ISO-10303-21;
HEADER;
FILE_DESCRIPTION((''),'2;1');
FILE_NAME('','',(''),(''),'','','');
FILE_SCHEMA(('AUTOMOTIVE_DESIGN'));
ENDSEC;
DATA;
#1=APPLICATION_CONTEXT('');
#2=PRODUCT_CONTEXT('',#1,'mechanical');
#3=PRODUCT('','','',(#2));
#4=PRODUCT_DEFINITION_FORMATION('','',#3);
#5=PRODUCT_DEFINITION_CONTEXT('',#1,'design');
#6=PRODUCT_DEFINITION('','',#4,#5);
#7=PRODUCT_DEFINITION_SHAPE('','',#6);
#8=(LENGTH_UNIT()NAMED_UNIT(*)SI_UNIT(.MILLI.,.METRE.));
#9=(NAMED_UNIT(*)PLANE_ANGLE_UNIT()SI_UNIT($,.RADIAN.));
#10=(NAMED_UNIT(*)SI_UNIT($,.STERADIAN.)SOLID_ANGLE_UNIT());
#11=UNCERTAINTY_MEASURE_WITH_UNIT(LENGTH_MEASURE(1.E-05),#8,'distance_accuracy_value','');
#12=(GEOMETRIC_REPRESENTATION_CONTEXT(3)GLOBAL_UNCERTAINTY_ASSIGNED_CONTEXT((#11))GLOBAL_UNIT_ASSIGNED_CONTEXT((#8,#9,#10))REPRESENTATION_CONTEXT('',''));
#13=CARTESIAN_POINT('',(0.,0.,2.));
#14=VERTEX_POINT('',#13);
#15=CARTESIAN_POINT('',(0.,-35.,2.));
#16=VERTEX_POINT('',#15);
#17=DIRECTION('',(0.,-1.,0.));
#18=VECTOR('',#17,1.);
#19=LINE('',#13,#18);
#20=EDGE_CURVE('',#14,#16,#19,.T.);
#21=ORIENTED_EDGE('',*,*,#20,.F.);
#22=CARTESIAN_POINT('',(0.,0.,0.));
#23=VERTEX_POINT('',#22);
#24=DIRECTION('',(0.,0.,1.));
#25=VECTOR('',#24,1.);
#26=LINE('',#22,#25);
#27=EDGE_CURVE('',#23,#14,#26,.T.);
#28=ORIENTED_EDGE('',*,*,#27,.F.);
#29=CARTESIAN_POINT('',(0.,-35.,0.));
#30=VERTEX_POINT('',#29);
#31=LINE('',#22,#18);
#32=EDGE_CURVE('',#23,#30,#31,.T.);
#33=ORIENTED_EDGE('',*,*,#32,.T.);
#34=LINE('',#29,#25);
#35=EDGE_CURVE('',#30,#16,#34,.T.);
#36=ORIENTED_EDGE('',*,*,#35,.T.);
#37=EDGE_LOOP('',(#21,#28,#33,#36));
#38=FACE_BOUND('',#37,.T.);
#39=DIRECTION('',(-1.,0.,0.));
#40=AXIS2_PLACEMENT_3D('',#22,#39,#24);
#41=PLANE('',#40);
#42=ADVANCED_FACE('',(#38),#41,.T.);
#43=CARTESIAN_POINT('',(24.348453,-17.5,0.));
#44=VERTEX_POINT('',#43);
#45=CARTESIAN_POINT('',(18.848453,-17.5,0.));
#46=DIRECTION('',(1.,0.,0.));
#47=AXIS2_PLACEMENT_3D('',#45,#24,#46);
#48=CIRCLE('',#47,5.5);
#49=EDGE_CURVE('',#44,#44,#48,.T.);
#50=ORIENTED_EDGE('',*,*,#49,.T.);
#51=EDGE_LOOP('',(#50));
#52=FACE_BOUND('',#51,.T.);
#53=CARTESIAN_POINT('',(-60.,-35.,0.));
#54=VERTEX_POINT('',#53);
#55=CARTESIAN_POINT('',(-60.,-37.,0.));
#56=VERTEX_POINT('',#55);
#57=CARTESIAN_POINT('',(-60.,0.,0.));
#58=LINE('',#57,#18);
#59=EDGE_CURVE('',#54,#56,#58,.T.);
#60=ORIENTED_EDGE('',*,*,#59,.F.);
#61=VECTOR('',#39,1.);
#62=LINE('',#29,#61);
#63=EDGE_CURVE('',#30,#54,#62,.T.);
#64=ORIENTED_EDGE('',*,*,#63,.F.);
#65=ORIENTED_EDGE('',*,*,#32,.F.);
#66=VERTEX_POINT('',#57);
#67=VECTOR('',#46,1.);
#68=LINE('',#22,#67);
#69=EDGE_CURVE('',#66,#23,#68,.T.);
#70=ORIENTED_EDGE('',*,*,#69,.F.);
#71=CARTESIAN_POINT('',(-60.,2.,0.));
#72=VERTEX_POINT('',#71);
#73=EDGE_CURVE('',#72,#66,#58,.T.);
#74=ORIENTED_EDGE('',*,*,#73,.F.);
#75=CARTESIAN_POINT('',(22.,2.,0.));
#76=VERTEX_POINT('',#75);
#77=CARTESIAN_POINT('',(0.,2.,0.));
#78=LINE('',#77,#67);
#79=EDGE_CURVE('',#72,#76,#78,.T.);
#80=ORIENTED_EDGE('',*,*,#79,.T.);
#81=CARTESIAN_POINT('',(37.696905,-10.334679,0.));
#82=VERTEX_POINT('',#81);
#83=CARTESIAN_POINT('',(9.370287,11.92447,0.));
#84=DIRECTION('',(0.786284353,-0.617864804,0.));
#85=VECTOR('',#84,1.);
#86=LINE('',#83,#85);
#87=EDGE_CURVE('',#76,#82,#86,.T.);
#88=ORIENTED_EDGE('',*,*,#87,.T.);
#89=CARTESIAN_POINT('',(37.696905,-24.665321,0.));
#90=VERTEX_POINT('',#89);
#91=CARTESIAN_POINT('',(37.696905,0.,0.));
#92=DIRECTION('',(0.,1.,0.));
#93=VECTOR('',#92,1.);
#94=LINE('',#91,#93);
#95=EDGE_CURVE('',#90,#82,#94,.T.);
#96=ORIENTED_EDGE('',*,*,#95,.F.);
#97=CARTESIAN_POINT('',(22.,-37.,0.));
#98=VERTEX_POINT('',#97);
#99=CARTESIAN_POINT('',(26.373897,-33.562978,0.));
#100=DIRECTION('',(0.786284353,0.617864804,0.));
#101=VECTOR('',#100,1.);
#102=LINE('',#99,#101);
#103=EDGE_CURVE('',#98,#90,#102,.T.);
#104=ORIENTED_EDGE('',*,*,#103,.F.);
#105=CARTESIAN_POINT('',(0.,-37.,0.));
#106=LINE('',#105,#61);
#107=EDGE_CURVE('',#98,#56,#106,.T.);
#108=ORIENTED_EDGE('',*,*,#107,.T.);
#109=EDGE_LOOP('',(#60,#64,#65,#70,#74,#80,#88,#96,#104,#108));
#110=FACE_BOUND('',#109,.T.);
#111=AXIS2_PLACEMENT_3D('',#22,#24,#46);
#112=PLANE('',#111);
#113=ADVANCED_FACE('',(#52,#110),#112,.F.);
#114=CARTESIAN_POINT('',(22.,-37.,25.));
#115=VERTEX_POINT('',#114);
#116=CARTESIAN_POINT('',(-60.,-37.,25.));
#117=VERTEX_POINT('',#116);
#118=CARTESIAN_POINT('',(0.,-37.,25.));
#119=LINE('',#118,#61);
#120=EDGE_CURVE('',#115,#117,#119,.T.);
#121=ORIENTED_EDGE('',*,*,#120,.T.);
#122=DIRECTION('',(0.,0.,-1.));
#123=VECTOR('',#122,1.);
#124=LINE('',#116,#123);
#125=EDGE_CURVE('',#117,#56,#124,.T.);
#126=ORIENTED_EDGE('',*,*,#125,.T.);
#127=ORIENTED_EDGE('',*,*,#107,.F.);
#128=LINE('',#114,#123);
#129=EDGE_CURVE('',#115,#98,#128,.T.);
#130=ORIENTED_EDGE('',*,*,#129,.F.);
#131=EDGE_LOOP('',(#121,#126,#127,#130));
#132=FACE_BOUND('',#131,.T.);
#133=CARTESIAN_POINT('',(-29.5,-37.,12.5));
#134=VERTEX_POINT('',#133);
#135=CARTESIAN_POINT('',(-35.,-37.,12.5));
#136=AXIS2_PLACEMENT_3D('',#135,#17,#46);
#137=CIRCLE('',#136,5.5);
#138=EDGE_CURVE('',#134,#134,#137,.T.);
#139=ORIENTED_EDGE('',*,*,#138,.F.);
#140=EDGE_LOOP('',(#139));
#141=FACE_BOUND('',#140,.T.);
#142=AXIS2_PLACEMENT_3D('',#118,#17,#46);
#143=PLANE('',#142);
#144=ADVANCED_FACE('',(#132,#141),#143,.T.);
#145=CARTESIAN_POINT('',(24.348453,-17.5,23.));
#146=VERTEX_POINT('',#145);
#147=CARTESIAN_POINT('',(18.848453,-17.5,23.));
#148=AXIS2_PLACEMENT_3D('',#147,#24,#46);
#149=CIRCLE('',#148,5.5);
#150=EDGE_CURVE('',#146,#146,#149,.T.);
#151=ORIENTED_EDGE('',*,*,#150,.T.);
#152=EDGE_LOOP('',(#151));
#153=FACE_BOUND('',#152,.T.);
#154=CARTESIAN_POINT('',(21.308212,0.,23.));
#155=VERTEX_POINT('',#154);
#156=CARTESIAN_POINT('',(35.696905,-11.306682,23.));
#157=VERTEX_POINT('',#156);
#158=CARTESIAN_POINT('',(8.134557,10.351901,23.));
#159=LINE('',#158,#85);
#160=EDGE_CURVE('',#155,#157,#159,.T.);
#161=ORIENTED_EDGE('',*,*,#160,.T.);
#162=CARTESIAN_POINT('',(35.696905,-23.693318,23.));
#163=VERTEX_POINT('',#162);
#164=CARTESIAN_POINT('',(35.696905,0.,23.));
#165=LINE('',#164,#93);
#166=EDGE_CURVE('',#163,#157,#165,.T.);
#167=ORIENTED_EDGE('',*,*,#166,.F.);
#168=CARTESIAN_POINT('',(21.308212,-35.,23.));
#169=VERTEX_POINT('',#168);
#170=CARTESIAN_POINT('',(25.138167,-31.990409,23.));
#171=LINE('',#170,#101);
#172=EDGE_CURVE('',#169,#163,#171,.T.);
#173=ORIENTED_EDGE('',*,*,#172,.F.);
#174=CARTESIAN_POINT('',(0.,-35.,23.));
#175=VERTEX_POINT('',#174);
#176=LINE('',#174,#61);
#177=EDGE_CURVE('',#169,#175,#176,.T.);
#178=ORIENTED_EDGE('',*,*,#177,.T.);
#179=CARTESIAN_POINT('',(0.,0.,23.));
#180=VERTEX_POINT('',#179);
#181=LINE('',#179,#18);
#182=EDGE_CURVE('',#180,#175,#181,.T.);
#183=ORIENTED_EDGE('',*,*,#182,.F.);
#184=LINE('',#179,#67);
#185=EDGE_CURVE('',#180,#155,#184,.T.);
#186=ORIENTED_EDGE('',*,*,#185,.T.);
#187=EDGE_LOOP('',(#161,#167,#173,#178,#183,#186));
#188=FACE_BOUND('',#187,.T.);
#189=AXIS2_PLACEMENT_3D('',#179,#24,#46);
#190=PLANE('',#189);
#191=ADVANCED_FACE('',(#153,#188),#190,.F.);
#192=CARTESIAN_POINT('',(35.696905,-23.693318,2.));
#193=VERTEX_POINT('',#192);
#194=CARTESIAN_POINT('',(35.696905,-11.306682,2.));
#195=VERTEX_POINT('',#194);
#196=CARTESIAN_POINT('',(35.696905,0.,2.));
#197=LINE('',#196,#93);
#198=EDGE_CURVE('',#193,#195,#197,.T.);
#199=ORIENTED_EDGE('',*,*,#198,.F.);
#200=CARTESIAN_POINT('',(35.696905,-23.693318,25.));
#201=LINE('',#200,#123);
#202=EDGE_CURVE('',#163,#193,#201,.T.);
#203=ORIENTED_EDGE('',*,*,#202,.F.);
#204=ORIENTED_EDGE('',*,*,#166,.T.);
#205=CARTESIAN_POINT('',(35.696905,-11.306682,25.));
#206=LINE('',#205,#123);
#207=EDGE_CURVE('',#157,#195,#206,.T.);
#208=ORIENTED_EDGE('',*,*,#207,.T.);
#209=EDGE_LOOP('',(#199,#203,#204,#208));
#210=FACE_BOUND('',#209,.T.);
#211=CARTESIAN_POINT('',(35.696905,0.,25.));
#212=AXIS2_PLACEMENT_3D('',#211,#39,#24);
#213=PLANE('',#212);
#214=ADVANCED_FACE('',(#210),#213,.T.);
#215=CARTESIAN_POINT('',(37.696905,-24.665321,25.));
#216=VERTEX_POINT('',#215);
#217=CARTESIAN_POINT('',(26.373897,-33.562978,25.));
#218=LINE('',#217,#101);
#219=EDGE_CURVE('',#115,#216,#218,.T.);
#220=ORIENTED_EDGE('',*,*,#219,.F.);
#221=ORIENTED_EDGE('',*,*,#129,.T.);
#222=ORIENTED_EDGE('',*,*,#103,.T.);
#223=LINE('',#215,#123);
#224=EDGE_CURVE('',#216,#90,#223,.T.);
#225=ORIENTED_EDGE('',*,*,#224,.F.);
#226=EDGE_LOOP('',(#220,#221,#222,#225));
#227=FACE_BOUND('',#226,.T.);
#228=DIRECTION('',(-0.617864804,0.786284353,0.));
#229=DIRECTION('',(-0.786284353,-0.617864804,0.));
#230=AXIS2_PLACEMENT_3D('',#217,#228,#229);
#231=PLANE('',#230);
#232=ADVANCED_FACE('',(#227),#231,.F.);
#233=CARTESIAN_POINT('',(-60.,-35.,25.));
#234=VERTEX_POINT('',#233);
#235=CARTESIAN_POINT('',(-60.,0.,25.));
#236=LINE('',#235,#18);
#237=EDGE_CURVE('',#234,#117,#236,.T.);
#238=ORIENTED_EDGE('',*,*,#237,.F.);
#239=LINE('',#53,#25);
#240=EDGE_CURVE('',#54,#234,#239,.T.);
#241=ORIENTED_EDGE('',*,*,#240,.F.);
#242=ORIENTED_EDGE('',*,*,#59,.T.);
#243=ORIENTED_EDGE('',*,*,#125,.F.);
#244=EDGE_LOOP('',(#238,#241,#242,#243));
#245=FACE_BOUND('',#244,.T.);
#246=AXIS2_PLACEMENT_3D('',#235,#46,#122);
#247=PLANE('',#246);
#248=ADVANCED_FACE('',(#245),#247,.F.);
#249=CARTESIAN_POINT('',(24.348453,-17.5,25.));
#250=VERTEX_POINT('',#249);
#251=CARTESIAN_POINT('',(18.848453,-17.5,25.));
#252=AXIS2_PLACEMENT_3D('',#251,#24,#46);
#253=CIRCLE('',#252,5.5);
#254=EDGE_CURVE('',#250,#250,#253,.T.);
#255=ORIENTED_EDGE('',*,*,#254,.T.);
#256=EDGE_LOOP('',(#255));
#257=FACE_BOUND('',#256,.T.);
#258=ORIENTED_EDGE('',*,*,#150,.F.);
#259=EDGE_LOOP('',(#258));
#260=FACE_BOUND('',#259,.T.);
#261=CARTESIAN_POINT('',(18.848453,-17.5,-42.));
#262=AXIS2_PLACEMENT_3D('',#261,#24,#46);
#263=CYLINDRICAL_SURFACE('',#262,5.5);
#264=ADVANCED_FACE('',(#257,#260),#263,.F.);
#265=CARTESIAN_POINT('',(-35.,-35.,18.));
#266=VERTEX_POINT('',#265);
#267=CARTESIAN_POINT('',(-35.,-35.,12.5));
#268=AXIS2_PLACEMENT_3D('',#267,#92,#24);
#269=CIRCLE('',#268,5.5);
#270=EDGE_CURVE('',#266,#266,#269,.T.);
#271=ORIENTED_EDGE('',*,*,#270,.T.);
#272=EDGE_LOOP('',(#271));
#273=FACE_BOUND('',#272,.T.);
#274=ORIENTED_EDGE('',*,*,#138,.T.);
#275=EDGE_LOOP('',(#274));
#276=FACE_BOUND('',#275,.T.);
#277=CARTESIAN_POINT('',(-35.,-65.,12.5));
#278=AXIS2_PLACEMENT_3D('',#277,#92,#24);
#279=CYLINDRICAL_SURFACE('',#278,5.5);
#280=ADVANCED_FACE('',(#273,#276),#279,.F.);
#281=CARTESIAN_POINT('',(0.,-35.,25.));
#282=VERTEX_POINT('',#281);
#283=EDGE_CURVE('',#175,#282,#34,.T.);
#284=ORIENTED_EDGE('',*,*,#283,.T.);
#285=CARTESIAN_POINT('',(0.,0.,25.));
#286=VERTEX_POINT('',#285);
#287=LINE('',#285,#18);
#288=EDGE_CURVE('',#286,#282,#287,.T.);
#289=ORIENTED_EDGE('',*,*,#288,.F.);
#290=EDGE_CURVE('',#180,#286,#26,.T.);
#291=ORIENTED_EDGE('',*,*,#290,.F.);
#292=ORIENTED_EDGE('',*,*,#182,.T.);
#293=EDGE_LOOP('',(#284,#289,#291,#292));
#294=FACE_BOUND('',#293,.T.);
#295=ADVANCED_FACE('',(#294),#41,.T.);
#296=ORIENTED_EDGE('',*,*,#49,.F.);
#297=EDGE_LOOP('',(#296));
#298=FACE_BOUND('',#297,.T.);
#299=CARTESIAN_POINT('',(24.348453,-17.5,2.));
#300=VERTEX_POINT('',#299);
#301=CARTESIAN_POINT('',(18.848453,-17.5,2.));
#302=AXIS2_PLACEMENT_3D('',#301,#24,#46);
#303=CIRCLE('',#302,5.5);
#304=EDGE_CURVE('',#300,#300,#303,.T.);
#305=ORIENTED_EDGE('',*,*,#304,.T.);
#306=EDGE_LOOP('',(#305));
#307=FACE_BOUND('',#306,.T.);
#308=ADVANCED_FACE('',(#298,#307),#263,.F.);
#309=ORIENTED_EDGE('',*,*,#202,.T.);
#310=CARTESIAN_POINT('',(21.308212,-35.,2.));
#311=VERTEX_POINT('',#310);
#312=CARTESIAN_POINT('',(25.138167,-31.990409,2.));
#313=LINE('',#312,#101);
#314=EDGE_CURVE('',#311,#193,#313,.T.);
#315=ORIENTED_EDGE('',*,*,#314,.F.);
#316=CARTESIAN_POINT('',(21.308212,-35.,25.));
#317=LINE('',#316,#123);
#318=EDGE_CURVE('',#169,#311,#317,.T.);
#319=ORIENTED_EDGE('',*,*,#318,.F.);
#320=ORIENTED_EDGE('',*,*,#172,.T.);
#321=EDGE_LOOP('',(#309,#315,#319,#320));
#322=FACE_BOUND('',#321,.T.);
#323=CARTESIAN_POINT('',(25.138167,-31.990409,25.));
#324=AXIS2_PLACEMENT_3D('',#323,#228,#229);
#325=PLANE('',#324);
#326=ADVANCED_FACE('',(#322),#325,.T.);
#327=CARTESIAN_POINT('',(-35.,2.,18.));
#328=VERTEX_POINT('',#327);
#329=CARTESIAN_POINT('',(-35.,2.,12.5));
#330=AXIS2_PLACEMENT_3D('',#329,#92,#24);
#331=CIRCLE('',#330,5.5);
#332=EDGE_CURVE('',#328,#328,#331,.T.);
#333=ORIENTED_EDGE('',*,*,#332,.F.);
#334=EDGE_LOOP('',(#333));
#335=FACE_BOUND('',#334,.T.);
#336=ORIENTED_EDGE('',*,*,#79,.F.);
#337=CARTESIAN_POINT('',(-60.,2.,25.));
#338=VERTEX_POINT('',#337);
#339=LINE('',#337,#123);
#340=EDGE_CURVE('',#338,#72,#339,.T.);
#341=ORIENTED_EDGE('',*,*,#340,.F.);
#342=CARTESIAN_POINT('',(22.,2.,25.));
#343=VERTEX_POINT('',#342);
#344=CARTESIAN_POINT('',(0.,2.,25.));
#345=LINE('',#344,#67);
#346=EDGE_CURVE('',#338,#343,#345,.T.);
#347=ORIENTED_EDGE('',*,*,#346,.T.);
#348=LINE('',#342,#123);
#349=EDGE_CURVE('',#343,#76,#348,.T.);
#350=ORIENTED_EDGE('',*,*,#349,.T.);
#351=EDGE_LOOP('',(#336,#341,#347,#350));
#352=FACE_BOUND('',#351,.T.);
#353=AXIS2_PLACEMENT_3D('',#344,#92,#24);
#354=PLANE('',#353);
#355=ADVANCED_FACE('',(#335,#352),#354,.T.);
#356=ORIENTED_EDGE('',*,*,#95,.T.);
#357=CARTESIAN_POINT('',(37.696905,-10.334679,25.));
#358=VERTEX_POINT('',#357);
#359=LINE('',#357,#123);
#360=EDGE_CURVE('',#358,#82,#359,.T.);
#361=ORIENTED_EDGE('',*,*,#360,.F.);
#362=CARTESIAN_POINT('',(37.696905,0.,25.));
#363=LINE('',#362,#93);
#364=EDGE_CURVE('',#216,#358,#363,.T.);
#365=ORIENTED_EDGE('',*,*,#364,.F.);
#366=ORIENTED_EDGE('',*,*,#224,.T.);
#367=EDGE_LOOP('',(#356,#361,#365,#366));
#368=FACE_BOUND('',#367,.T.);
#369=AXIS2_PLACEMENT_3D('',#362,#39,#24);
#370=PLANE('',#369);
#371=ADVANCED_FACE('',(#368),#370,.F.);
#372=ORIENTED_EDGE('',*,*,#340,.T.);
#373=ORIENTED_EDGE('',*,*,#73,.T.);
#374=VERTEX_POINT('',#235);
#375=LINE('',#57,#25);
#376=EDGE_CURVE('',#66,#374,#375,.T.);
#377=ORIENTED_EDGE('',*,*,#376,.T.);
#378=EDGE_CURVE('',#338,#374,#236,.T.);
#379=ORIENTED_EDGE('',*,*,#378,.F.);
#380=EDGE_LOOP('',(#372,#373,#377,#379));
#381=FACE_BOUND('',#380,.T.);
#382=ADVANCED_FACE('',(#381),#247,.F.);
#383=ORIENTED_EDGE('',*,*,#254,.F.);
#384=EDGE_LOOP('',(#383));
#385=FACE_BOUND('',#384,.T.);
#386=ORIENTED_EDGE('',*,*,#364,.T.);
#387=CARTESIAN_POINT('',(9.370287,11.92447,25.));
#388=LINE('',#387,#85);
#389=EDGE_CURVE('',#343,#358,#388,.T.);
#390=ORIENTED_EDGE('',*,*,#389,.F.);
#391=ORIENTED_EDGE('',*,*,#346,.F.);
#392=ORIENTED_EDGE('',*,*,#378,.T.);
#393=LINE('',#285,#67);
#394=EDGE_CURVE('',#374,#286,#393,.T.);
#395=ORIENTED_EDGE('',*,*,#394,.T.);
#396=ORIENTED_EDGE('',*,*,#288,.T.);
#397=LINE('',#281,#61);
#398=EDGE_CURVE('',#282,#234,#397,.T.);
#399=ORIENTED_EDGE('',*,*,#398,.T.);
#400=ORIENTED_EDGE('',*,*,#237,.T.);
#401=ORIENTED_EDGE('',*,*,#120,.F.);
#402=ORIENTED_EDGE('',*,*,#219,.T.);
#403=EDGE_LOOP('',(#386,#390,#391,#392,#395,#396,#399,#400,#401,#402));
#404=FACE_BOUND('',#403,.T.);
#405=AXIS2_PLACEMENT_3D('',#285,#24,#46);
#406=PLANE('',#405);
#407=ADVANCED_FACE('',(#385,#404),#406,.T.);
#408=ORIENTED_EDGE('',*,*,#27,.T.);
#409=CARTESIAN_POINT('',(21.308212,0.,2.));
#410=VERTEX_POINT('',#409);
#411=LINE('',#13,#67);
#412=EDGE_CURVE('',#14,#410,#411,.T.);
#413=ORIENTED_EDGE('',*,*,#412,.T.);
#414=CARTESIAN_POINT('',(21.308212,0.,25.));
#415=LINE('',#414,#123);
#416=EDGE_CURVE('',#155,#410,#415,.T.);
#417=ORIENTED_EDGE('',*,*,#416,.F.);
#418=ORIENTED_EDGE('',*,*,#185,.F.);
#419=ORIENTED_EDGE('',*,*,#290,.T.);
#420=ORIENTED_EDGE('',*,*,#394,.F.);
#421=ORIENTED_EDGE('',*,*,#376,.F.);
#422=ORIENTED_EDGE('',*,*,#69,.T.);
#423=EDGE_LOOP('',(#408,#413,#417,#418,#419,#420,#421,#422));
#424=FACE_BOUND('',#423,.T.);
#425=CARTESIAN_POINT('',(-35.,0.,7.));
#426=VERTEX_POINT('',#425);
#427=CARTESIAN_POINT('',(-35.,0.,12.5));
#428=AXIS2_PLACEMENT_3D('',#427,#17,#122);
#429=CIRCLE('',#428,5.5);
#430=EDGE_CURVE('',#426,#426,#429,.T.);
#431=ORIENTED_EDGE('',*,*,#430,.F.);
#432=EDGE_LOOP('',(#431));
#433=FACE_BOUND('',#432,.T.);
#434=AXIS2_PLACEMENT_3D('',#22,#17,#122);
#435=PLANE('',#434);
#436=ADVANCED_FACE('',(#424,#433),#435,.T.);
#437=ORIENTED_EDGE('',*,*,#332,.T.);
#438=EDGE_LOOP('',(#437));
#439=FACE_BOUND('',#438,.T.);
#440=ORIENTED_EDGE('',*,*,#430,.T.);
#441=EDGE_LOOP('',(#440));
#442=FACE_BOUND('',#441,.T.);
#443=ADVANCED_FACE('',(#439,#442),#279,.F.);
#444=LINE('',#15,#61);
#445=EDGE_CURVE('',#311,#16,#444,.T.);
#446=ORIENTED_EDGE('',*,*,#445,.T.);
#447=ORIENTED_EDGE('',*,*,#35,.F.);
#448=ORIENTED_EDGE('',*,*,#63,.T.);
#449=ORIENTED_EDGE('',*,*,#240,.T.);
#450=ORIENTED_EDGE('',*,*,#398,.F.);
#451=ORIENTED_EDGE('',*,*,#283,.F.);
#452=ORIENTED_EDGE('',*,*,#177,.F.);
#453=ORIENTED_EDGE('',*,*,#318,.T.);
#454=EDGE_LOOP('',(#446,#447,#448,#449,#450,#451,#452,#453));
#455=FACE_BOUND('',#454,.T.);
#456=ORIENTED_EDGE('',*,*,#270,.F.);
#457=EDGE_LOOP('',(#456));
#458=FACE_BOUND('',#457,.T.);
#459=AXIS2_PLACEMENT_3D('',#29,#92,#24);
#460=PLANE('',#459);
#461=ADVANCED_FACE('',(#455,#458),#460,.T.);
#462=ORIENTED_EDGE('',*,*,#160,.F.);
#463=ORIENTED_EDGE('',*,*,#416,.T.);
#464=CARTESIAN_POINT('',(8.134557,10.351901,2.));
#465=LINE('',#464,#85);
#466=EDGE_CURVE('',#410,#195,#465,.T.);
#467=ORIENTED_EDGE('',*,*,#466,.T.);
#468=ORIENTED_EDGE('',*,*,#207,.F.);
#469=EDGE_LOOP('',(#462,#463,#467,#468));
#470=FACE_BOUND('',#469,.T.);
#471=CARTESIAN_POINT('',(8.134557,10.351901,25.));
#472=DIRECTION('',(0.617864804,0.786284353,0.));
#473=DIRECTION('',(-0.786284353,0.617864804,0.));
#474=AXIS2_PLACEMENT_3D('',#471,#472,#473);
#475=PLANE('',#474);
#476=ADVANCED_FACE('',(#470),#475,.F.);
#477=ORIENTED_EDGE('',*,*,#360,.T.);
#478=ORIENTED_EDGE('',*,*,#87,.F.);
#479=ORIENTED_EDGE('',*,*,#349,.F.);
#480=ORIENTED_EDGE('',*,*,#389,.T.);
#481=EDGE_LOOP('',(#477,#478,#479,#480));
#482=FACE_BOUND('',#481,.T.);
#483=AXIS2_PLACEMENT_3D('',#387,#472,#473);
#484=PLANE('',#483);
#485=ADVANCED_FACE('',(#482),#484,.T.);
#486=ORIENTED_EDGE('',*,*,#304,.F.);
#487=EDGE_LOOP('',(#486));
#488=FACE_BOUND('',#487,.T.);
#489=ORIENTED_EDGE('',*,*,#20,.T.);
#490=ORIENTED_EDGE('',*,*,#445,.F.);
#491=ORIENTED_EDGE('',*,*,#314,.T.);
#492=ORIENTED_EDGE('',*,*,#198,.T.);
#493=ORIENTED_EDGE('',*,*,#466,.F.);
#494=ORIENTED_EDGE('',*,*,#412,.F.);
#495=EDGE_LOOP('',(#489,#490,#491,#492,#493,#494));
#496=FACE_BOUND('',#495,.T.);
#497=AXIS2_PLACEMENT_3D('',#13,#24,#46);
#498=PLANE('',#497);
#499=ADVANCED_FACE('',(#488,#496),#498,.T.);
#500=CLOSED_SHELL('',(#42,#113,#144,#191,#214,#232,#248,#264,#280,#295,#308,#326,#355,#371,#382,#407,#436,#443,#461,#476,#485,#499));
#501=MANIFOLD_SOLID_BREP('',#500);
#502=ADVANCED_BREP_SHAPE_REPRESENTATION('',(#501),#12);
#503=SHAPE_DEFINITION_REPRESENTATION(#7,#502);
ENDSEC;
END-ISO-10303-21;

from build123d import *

# Parameters (mm, degrees)
RESSALTO_EXTRUS_O2_DEPTH = 25
ESBO_O6_W                = 60
ESBO_O6_H                = 35
CORTE_EXTRUS_O4_DEPTH    = 25
ESBO_O7_R                = 5.5
CORTE_EXTRUS_O5_DEPTH    = 67
CASCA3_START             = 2
CASCA3_DEPTH             = 21
CORTE_EXTRUS_O7_DEPTH    = 67


# Read off the part's stored shape, not the designer's step: Casca3
with BuildPart() as part:
    # Esboço1 → Ressalto-extrusão2 (new body)
    with BuildSketch(Plane.XY):
        Polygon((-60, 2), (-60, 0), (-60, -35), (-60, -37), (2, -37), (22, -37), (37.696905261, -24.665320756), (37.696905261, -10.334679244), (22, 2), (2, 2), align=None)
    extrude(amount=RESSALTO_EXTRUS_O2_DEPTH)

    # Esboço6 → Corte-extrusão4 (cut)
    with BuildSketch(Plane.XY.offset(25)):
        with Locations((-30, -17.5)):
            Rectangle(ESBO_O6_W, ESBO_O6_H)
    extrude(amount=-CORTE_EXTRUS_O4_DEPTH, mode=Mode.SUBTRACT)

    # Esboço7 → Corte-extrusão5 (cut)
    with BuildSketch(Plane(origin=(0, 2, 0), x_dir=(1, 0, 0), z_dir=(0, 1, 0))):
        with Locations(Location((-35, -12.5, 0), (0, 0, 270))):
            Circle(ESBO_O7_R)
    extrude(amount=-CORTE_EXTRUS_O5_DEPTH, mode=Mode.SUBTRACT)

    # Casca3 outline → Casca3 (cut)
    with BuildSketch(Plane.XY.offset(CASCA3_START)):
        Polygon((0, -35), (21.308212264, -35), (35.696905261, -23.693318211), (35.696905261, -11.306681789), (21.308212264, 0), (0, 0), align=None)
    extrude(amount=CASCA3_DEPTH, mode=Mode.SUBTRACT)

    # Esboço8 → Corte-extrusão7 (cut)
    with BuildSketch(Plane.XY.offset(25)):
        with BuildLine():
            ThreePointArc((13.34845263, -17.5), (18.84845263, -23), (24.34845263, -17.5))
            Line((24.34845263, -17.5), (13.34845263, -17.5))
        make_face()
        with BuildLine():
            Line((13.34845263, -17.5), (24.34845263, -17.5))
            ThreePointArc((24.34845263, -17.5), (18.84845263, -12), (13.34845263, -17.5))
        make_face()
    extrude(amount=-CORTE_EXTRUS_O7_DEPTH, mode=Mode.SUBTRACT)


solid = part.part
